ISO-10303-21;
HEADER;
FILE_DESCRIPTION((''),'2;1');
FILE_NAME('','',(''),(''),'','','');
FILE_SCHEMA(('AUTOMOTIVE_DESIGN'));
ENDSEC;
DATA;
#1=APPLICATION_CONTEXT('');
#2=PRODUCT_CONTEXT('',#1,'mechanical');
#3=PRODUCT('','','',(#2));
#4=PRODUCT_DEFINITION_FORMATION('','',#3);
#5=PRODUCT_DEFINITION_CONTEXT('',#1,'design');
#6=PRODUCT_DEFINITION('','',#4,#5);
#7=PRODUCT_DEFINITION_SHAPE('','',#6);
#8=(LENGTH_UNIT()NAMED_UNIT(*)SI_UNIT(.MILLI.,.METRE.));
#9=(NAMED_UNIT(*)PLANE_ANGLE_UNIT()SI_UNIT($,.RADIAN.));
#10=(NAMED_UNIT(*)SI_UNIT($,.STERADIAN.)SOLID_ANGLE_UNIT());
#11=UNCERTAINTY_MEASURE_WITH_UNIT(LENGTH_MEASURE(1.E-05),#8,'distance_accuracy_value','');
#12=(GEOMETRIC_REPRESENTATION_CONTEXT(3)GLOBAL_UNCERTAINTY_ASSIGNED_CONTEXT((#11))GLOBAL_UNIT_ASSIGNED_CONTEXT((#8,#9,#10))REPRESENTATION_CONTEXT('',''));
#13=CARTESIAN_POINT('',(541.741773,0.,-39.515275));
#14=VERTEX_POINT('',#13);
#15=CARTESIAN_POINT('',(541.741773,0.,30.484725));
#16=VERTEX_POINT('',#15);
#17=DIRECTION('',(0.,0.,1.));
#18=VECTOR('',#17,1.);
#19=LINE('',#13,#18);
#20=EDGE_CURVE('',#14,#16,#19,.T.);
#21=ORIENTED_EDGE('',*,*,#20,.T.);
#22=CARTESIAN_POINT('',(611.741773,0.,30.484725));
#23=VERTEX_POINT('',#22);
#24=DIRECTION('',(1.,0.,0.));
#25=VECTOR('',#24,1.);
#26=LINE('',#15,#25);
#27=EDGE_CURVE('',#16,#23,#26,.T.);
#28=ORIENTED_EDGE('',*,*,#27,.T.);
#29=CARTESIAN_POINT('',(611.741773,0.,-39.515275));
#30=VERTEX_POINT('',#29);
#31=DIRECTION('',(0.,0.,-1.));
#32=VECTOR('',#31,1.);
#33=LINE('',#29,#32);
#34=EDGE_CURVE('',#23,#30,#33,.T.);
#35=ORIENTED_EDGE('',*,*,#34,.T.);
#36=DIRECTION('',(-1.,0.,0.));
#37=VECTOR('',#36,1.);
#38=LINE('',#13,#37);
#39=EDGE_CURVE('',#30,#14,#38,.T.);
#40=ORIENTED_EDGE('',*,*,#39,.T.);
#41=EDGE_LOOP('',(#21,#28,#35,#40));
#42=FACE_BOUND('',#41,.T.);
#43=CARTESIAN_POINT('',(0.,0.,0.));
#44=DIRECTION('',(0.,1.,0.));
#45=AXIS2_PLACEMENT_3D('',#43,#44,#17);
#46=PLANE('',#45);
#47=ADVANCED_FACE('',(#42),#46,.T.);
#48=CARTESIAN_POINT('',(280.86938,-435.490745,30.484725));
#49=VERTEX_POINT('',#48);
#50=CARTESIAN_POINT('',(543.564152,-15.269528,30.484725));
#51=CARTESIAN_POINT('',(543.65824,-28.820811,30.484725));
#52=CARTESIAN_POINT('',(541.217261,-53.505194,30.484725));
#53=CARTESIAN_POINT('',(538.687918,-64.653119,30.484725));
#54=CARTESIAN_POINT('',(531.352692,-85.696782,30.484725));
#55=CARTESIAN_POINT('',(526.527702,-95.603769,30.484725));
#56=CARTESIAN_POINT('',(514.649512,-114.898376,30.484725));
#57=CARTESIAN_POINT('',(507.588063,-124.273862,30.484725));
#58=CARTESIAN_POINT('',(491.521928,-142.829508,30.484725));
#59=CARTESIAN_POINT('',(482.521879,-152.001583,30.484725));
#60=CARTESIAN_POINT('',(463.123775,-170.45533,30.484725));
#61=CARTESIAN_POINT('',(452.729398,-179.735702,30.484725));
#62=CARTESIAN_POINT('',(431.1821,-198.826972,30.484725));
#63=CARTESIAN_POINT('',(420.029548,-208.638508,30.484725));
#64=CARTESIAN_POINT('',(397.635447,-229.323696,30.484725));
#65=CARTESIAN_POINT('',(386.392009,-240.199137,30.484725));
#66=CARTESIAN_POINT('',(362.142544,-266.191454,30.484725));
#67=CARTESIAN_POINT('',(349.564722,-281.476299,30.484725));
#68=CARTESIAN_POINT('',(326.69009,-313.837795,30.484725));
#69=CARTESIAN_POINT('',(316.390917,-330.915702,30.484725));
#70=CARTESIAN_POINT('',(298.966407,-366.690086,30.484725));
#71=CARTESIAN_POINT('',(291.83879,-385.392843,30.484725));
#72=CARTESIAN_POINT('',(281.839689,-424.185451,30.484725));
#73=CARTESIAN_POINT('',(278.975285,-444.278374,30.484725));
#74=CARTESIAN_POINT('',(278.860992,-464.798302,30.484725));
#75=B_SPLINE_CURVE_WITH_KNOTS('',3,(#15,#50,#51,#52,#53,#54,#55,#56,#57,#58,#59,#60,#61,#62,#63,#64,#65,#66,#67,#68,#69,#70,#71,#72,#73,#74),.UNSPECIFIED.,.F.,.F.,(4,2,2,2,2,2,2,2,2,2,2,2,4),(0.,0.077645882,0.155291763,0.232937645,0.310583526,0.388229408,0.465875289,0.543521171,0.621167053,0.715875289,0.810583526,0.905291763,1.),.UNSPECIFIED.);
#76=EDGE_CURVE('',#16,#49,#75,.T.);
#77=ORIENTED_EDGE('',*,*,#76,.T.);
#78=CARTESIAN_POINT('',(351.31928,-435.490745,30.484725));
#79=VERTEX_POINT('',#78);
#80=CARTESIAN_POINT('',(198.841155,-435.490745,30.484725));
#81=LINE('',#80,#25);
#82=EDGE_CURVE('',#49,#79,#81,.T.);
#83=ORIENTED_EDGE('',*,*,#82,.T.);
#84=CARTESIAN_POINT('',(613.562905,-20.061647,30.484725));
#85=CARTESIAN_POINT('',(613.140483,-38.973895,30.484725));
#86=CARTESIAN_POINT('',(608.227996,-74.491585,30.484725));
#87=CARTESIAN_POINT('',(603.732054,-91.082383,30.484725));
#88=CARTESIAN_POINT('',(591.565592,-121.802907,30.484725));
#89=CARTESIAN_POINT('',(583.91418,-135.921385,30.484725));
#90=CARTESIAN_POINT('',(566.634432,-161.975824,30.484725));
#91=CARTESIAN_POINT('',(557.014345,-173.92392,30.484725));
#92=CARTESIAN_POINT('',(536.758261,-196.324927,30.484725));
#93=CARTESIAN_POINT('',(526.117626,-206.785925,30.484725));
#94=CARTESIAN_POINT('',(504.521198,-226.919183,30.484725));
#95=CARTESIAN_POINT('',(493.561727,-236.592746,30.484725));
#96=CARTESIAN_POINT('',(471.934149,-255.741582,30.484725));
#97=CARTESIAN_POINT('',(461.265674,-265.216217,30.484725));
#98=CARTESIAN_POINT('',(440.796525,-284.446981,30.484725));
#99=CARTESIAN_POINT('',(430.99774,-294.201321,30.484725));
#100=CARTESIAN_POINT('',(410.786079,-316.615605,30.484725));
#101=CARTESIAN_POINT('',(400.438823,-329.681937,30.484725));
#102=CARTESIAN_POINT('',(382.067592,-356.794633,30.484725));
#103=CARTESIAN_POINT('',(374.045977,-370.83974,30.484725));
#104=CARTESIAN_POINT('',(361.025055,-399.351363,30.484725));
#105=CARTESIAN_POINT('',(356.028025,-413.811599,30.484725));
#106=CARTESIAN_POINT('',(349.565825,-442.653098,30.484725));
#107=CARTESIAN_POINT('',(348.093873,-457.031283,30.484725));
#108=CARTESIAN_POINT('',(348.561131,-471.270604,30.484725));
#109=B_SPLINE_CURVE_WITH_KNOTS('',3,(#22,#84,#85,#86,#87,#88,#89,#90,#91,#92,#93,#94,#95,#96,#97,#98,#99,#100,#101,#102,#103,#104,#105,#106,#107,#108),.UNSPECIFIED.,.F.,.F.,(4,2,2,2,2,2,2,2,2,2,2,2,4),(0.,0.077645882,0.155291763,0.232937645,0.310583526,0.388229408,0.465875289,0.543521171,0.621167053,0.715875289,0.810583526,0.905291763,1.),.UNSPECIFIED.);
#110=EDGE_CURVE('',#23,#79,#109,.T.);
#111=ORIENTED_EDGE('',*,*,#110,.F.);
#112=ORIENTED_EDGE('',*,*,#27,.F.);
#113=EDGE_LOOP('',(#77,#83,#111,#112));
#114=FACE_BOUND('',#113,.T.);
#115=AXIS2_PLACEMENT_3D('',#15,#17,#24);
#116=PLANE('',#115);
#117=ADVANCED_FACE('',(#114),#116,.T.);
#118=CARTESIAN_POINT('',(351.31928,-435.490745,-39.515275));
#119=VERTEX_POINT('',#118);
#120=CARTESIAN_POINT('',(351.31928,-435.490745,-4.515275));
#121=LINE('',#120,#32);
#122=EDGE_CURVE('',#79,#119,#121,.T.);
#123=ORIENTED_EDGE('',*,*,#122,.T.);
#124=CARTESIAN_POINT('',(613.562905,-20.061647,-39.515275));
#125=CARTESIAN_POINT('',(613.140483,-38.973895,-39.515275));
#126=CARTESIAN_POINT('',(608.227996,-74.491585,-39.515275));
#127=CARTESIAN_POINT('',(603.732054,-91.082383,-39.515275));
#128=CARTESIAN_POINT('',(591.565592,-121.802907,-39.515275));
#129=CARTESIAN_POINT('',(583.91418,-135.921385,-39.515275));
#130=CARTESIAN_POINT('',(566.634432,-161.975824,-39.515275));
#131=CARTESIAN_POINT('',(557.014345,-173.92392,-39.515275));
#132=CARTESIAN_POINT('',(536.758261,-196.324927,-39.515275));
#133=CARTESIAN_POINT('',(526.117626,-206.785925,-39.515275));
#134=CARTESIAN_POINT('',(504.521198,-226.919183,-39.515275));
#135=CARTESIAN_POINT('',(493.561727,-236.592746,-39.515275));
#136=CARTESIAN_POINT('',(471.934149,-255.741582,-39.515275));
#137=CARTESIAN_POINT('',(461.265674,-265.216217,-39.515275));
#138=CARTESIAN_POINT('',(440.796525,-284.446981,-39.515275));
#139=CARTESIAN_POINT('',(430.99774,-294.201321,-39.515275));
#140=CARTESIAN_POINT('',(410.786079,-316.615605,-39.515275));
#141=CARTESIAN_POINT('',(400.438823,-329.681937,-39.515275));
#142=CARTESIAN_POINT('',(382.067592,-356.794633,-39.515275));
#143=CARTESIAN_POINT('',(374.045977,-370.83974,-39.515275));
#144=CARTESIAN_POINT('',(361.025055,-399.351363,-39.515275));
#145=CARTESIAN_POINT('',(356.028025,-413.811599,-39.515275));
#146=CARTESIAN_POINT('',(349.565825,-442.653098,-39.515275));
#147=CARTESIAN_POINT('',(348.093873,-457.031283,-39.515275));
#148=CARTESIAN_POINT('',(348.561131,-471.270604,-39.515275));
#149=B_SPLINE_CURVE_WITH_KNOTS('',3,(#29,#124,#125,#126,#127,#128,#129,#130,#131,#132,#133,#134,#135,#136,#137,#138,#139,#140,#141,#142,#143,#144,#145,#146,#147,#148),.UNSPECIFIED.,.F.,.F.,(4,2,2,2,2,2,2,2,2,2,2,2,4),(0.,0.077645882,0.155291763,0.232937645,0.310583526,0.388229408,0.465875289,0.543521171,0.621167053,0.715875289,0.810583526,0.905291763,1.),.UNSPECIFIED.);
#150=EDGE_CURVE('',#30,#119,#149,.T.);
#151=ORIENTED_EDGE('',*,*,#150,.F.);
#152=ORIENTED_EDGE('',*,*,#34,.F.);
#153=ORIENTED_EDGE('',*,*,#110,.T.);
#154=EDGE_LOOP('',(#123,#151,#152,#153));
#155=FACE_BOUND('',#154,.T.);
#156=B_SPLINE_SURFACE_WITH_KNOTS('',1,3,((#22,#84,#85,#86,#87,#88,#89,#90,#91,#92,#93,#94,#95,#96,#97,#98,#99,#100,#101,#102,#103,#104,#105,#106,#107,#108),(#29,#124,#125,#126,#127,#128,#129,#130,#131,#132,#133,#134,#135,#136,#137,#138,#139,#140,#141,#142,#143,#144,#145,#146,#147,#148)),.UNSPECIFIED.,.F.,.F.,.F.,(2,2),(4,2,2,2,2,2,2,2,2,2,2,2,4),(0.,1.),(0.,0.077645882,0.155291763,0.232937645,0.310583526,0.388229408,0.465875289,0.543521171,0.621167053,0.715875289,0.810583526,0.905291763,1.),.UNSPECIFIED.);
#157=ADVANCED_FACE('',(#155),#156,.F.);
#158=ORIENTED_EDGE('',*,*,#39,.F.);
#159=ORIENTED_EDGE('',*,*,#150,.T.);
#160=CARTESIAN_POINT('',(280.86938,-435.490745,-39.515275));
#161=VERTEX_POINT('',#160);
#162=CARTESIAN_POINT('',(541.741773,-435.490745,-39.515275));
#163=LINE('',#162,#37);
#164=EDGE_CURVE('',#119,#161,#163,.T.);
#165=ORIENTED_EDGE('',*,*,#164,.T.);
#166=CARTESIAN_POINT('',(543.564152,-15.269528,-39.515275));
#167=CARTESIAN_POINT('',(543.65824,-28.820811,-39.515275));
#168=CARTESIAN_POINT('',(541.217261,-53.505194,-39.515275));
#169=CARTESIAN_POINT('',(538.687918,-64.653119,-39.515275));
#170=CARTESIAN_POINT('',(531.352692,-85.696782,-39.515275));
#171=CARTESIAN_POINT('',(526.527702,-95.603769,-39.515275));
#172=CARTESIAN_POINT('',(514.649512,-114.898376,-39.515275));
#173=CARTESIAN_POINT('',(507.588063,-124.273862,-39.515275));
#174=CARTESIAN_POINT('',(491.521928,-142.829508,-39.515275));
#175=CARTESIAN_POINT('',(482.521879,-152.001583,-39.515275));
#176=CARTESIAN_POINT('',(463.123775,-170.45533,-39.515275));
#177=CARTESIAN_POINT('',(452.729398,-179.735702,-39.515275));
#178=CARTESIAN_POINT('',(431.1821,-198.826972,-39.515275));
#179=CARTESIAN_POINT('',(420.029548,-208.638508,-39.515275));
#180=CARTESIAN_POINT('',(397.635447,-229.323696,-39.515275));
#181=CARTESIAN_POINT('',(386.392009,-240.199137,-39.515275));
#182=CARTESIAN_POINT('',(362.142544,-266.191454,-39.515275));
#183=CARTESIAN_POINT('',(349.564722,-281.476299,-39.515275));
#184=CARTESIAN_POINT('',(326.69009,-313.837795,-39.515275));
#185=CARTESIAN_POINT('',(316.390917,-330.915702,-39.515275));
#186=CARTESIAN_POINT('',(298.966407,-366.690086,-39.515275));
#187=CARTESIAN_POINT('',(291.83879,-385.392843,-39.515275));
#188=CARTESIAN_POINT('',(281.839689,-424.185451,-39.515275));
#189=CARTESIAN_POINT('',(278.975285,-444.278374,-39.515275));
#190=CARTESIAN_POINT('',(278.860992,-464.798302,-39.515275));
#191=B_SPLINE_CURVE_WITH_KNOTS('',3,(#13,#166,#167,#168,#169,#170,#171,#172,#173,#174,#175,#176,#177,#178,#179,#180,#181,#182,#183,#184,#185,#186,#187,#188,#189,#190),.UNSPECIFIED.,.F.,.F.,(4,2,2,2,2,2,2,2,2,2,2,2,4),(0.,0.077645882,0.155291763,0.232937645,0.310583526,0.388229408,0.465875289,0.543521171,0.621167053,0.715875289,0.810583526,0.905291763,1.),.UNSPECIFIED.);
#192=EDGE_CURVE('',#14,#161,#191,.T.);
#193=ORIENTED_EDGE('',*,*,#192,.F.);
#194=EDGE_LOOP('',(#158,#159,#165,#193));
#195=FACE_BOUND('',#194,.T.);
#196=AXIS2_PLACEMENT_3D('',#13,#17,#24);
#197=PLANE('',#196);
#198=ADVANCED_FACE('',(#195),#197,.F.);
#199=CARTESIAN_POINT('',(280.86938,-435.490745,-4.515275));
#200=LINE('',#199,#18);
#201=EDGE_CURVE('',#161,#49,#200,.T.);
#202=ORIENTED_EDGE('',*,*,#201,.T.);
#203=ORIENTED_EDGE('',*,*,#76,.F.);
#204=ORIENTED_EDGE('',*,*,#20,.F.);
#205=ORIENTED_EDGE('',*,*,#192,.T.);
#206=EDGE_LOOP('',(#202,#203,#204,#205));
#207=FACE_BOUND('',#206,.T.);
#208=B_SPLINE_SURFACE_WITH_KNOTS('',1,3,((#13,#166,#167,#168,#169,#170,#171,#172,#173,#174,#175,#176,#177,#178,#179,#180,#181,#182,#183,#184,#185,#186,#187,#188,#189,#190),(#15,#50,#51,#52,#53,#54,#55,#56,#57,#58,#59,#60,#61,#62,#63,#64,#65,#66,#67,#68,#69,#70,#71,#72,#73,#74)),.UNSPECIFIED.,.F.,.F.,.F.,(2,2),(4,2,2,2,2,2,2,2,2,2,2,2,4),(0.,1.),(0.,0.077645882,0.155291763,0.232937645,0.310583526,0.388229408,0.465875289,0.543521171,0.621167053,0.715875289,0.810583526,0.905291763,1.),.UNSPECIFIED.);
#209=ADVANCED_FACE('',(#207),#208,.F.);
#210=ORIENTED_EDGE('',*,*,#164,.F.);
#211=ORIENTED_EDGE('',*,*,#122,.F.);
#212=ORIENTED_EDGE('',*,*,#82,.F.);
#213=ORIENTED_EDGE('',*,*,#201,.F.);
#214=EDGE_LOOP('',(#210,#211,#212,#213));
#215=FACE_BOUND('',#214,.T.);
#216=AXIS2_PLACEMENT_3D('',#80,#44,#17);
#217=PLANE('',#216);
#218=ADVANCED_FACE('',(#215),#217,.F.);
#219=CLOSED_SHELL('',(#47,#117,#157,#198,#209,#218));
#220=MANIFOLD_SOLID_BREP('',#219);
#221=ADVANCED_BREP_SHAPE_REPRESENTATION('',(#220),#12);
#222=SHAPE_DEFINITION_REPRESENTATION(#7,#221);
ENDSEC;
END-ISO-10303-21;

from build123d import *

# Parameters (mm, degrees)
SWEEP_START              = -39.51527456
SWEEP_8_DEPTH            = 70
CUT_EXTRUDE_1_DEPTH      = 775.119381415
CUT_EXTRUDE_1_DEPTH_BACK = 1000
SKETCH_14_W              = 412.900617981
SKETCH_14_H              = 48.735578835
SKETCH_14_W_2            = 392.900617981
SKETCH_14_H_2            = 28.735578835


# Read off the part's stored shape, not the designer's step: 扫描8
with BuildPart() as part:
    # 扫描8 outline → 扫描8 (new body)
    with BuildSketch(Plane.XY.offset(SWEEP_START)):
        with BuildLine():
            add(Edge.make_bspline(
                [(611.74177279, 0), (613.562905225, -20.061647212), (613.140483384, -38.97389472), (608.22799564, -74.491585311), (603.732053663, -91.082382902), (591.565592027, -121.802907269), (583.9141797, -135.921385393), (566.634432132, -161.975824337), (557.014345367, -173.923920184), (536.758260824, -196.324927261), (526.117626199, -206.785924759), (504.521198396, -226.919183017), (493.561726757, -236.592745768), (471.93414929, -255.741582394), (461.265673609, -265.216217079), (440.796524994, -284.446980973), (430.997740472, -294.201320957), (410.786079495, -316.61560512), (400.438823277, -329.681936911), (382.067591567, -356.794632727), (374.045977449, -370.839740148), (361.025054863, -399.351363376), (356.0280253, -413.811599267), (349.565825431, -442.653097808), (348.093872619, -457.03128295), (348.561130912, -471.270604447)],
                knots=[0, 0, 0, 0, 0.077645882, 0.077645882, 0.155291763, 0.155291763, 0.232937645, 0.232937645, 0.310583526, 0.310583526, 0.388229408, 0.388229408, 0.465875289, 0.465875289, 0.543521171, 0.543521171, 0.621167053, 0.621167053, 0.715875289, 0.715875289, 0.810583526, 0.810583526, 0.905291763, 0.905291763, 1, 1, 1, 1], degree=3))
            Line((611.74177279, 0), (541.74177279, 0))
            add(Edge.make_bspline(
                [(541.74177279, 0), (543.564152195, -15.269528182), (543.65824021, -28.82081106), (541.217260508, -53.505194451), (538.687917708, -64.6531188), (531.352692177, -85.69678154), (526.527702124, -95.603768577), (514.649511843, -114.89837648), (507.588063148, -124.273862324), (491.52192821, -142.829508474), (482.52187882, -152.001582509), (463.123774553, -170.455330471), (452.729398142, -179.735702409), (431.182100001, -198.82697163), (420.029548121, -208.638508101), (397.63544663, -229.323696303), (386.392008606, -240.199137256), (362.142543771, -266.191454308), (349.564722419, -281.476299366), (326.690089811, -313.837794757), (316.390917174, -330.915701707), (298.966406943, -366.690086014), (291.838790441, -385.392843292), (281.839688743, -424.185451174), (278.975285414, -444.278374115), (278.86099248, -464.798301725)],
                knots=[0, 0, 0, 0, 0.077645882, 0.077645882, 0.155291763, 0.155291763, 0.232937645, 0.232937645, 0.310583526, 0.310583526, 0.388229408, 0.388229408, 0.465875289, 0.465875289, 0.543521171, 0.543521171, 0.621167053, 0.621167053, 0.715875289, 0.715875289, 0.810583526, 0.810583526, 0.905291763, 0.905291763, 1, 1, 1, 1], degree=3))
            Line((278.86099248, -464.798301725), (348.561130912, -471.270604447))
        make_face()
    extrude(amount=SWEEP_8_DEPTH)

    # 草图14 → 切除-拉伸-薄壁1 (cut, two sides: drawn at the far end of the back side and taken through both)
    with BuildSketch(Plane.XY.offset(-CUT_EXTRUDE_1_DEPTH_BACK)):
        with Locations((405.2914638, -459.858534228)):
            Rectangle(SKETCH_14_W, SKETCH_14_H)
        with Locations((405.2914638, -459.858534228)):
            Rectangle(SKETCH_14_W_2, SKETCH_14_H_2, mode=Mode.SUBTRACT)
    extrude(amount=CUT_EXTRUDE_1_DEPTH + CUT_EXTRUDE_1_DEPTH_BACK, mode=Mode.SUBTRACT)


with BuildPart() as body_2:
    # of the pieces the cut leaves, the one that is kept (cut_extrude_1_keep)
    add(part.part.solids().sort_by_distance((611.74177279, 0, -39.51527456))[0])


solid = body_2.part
